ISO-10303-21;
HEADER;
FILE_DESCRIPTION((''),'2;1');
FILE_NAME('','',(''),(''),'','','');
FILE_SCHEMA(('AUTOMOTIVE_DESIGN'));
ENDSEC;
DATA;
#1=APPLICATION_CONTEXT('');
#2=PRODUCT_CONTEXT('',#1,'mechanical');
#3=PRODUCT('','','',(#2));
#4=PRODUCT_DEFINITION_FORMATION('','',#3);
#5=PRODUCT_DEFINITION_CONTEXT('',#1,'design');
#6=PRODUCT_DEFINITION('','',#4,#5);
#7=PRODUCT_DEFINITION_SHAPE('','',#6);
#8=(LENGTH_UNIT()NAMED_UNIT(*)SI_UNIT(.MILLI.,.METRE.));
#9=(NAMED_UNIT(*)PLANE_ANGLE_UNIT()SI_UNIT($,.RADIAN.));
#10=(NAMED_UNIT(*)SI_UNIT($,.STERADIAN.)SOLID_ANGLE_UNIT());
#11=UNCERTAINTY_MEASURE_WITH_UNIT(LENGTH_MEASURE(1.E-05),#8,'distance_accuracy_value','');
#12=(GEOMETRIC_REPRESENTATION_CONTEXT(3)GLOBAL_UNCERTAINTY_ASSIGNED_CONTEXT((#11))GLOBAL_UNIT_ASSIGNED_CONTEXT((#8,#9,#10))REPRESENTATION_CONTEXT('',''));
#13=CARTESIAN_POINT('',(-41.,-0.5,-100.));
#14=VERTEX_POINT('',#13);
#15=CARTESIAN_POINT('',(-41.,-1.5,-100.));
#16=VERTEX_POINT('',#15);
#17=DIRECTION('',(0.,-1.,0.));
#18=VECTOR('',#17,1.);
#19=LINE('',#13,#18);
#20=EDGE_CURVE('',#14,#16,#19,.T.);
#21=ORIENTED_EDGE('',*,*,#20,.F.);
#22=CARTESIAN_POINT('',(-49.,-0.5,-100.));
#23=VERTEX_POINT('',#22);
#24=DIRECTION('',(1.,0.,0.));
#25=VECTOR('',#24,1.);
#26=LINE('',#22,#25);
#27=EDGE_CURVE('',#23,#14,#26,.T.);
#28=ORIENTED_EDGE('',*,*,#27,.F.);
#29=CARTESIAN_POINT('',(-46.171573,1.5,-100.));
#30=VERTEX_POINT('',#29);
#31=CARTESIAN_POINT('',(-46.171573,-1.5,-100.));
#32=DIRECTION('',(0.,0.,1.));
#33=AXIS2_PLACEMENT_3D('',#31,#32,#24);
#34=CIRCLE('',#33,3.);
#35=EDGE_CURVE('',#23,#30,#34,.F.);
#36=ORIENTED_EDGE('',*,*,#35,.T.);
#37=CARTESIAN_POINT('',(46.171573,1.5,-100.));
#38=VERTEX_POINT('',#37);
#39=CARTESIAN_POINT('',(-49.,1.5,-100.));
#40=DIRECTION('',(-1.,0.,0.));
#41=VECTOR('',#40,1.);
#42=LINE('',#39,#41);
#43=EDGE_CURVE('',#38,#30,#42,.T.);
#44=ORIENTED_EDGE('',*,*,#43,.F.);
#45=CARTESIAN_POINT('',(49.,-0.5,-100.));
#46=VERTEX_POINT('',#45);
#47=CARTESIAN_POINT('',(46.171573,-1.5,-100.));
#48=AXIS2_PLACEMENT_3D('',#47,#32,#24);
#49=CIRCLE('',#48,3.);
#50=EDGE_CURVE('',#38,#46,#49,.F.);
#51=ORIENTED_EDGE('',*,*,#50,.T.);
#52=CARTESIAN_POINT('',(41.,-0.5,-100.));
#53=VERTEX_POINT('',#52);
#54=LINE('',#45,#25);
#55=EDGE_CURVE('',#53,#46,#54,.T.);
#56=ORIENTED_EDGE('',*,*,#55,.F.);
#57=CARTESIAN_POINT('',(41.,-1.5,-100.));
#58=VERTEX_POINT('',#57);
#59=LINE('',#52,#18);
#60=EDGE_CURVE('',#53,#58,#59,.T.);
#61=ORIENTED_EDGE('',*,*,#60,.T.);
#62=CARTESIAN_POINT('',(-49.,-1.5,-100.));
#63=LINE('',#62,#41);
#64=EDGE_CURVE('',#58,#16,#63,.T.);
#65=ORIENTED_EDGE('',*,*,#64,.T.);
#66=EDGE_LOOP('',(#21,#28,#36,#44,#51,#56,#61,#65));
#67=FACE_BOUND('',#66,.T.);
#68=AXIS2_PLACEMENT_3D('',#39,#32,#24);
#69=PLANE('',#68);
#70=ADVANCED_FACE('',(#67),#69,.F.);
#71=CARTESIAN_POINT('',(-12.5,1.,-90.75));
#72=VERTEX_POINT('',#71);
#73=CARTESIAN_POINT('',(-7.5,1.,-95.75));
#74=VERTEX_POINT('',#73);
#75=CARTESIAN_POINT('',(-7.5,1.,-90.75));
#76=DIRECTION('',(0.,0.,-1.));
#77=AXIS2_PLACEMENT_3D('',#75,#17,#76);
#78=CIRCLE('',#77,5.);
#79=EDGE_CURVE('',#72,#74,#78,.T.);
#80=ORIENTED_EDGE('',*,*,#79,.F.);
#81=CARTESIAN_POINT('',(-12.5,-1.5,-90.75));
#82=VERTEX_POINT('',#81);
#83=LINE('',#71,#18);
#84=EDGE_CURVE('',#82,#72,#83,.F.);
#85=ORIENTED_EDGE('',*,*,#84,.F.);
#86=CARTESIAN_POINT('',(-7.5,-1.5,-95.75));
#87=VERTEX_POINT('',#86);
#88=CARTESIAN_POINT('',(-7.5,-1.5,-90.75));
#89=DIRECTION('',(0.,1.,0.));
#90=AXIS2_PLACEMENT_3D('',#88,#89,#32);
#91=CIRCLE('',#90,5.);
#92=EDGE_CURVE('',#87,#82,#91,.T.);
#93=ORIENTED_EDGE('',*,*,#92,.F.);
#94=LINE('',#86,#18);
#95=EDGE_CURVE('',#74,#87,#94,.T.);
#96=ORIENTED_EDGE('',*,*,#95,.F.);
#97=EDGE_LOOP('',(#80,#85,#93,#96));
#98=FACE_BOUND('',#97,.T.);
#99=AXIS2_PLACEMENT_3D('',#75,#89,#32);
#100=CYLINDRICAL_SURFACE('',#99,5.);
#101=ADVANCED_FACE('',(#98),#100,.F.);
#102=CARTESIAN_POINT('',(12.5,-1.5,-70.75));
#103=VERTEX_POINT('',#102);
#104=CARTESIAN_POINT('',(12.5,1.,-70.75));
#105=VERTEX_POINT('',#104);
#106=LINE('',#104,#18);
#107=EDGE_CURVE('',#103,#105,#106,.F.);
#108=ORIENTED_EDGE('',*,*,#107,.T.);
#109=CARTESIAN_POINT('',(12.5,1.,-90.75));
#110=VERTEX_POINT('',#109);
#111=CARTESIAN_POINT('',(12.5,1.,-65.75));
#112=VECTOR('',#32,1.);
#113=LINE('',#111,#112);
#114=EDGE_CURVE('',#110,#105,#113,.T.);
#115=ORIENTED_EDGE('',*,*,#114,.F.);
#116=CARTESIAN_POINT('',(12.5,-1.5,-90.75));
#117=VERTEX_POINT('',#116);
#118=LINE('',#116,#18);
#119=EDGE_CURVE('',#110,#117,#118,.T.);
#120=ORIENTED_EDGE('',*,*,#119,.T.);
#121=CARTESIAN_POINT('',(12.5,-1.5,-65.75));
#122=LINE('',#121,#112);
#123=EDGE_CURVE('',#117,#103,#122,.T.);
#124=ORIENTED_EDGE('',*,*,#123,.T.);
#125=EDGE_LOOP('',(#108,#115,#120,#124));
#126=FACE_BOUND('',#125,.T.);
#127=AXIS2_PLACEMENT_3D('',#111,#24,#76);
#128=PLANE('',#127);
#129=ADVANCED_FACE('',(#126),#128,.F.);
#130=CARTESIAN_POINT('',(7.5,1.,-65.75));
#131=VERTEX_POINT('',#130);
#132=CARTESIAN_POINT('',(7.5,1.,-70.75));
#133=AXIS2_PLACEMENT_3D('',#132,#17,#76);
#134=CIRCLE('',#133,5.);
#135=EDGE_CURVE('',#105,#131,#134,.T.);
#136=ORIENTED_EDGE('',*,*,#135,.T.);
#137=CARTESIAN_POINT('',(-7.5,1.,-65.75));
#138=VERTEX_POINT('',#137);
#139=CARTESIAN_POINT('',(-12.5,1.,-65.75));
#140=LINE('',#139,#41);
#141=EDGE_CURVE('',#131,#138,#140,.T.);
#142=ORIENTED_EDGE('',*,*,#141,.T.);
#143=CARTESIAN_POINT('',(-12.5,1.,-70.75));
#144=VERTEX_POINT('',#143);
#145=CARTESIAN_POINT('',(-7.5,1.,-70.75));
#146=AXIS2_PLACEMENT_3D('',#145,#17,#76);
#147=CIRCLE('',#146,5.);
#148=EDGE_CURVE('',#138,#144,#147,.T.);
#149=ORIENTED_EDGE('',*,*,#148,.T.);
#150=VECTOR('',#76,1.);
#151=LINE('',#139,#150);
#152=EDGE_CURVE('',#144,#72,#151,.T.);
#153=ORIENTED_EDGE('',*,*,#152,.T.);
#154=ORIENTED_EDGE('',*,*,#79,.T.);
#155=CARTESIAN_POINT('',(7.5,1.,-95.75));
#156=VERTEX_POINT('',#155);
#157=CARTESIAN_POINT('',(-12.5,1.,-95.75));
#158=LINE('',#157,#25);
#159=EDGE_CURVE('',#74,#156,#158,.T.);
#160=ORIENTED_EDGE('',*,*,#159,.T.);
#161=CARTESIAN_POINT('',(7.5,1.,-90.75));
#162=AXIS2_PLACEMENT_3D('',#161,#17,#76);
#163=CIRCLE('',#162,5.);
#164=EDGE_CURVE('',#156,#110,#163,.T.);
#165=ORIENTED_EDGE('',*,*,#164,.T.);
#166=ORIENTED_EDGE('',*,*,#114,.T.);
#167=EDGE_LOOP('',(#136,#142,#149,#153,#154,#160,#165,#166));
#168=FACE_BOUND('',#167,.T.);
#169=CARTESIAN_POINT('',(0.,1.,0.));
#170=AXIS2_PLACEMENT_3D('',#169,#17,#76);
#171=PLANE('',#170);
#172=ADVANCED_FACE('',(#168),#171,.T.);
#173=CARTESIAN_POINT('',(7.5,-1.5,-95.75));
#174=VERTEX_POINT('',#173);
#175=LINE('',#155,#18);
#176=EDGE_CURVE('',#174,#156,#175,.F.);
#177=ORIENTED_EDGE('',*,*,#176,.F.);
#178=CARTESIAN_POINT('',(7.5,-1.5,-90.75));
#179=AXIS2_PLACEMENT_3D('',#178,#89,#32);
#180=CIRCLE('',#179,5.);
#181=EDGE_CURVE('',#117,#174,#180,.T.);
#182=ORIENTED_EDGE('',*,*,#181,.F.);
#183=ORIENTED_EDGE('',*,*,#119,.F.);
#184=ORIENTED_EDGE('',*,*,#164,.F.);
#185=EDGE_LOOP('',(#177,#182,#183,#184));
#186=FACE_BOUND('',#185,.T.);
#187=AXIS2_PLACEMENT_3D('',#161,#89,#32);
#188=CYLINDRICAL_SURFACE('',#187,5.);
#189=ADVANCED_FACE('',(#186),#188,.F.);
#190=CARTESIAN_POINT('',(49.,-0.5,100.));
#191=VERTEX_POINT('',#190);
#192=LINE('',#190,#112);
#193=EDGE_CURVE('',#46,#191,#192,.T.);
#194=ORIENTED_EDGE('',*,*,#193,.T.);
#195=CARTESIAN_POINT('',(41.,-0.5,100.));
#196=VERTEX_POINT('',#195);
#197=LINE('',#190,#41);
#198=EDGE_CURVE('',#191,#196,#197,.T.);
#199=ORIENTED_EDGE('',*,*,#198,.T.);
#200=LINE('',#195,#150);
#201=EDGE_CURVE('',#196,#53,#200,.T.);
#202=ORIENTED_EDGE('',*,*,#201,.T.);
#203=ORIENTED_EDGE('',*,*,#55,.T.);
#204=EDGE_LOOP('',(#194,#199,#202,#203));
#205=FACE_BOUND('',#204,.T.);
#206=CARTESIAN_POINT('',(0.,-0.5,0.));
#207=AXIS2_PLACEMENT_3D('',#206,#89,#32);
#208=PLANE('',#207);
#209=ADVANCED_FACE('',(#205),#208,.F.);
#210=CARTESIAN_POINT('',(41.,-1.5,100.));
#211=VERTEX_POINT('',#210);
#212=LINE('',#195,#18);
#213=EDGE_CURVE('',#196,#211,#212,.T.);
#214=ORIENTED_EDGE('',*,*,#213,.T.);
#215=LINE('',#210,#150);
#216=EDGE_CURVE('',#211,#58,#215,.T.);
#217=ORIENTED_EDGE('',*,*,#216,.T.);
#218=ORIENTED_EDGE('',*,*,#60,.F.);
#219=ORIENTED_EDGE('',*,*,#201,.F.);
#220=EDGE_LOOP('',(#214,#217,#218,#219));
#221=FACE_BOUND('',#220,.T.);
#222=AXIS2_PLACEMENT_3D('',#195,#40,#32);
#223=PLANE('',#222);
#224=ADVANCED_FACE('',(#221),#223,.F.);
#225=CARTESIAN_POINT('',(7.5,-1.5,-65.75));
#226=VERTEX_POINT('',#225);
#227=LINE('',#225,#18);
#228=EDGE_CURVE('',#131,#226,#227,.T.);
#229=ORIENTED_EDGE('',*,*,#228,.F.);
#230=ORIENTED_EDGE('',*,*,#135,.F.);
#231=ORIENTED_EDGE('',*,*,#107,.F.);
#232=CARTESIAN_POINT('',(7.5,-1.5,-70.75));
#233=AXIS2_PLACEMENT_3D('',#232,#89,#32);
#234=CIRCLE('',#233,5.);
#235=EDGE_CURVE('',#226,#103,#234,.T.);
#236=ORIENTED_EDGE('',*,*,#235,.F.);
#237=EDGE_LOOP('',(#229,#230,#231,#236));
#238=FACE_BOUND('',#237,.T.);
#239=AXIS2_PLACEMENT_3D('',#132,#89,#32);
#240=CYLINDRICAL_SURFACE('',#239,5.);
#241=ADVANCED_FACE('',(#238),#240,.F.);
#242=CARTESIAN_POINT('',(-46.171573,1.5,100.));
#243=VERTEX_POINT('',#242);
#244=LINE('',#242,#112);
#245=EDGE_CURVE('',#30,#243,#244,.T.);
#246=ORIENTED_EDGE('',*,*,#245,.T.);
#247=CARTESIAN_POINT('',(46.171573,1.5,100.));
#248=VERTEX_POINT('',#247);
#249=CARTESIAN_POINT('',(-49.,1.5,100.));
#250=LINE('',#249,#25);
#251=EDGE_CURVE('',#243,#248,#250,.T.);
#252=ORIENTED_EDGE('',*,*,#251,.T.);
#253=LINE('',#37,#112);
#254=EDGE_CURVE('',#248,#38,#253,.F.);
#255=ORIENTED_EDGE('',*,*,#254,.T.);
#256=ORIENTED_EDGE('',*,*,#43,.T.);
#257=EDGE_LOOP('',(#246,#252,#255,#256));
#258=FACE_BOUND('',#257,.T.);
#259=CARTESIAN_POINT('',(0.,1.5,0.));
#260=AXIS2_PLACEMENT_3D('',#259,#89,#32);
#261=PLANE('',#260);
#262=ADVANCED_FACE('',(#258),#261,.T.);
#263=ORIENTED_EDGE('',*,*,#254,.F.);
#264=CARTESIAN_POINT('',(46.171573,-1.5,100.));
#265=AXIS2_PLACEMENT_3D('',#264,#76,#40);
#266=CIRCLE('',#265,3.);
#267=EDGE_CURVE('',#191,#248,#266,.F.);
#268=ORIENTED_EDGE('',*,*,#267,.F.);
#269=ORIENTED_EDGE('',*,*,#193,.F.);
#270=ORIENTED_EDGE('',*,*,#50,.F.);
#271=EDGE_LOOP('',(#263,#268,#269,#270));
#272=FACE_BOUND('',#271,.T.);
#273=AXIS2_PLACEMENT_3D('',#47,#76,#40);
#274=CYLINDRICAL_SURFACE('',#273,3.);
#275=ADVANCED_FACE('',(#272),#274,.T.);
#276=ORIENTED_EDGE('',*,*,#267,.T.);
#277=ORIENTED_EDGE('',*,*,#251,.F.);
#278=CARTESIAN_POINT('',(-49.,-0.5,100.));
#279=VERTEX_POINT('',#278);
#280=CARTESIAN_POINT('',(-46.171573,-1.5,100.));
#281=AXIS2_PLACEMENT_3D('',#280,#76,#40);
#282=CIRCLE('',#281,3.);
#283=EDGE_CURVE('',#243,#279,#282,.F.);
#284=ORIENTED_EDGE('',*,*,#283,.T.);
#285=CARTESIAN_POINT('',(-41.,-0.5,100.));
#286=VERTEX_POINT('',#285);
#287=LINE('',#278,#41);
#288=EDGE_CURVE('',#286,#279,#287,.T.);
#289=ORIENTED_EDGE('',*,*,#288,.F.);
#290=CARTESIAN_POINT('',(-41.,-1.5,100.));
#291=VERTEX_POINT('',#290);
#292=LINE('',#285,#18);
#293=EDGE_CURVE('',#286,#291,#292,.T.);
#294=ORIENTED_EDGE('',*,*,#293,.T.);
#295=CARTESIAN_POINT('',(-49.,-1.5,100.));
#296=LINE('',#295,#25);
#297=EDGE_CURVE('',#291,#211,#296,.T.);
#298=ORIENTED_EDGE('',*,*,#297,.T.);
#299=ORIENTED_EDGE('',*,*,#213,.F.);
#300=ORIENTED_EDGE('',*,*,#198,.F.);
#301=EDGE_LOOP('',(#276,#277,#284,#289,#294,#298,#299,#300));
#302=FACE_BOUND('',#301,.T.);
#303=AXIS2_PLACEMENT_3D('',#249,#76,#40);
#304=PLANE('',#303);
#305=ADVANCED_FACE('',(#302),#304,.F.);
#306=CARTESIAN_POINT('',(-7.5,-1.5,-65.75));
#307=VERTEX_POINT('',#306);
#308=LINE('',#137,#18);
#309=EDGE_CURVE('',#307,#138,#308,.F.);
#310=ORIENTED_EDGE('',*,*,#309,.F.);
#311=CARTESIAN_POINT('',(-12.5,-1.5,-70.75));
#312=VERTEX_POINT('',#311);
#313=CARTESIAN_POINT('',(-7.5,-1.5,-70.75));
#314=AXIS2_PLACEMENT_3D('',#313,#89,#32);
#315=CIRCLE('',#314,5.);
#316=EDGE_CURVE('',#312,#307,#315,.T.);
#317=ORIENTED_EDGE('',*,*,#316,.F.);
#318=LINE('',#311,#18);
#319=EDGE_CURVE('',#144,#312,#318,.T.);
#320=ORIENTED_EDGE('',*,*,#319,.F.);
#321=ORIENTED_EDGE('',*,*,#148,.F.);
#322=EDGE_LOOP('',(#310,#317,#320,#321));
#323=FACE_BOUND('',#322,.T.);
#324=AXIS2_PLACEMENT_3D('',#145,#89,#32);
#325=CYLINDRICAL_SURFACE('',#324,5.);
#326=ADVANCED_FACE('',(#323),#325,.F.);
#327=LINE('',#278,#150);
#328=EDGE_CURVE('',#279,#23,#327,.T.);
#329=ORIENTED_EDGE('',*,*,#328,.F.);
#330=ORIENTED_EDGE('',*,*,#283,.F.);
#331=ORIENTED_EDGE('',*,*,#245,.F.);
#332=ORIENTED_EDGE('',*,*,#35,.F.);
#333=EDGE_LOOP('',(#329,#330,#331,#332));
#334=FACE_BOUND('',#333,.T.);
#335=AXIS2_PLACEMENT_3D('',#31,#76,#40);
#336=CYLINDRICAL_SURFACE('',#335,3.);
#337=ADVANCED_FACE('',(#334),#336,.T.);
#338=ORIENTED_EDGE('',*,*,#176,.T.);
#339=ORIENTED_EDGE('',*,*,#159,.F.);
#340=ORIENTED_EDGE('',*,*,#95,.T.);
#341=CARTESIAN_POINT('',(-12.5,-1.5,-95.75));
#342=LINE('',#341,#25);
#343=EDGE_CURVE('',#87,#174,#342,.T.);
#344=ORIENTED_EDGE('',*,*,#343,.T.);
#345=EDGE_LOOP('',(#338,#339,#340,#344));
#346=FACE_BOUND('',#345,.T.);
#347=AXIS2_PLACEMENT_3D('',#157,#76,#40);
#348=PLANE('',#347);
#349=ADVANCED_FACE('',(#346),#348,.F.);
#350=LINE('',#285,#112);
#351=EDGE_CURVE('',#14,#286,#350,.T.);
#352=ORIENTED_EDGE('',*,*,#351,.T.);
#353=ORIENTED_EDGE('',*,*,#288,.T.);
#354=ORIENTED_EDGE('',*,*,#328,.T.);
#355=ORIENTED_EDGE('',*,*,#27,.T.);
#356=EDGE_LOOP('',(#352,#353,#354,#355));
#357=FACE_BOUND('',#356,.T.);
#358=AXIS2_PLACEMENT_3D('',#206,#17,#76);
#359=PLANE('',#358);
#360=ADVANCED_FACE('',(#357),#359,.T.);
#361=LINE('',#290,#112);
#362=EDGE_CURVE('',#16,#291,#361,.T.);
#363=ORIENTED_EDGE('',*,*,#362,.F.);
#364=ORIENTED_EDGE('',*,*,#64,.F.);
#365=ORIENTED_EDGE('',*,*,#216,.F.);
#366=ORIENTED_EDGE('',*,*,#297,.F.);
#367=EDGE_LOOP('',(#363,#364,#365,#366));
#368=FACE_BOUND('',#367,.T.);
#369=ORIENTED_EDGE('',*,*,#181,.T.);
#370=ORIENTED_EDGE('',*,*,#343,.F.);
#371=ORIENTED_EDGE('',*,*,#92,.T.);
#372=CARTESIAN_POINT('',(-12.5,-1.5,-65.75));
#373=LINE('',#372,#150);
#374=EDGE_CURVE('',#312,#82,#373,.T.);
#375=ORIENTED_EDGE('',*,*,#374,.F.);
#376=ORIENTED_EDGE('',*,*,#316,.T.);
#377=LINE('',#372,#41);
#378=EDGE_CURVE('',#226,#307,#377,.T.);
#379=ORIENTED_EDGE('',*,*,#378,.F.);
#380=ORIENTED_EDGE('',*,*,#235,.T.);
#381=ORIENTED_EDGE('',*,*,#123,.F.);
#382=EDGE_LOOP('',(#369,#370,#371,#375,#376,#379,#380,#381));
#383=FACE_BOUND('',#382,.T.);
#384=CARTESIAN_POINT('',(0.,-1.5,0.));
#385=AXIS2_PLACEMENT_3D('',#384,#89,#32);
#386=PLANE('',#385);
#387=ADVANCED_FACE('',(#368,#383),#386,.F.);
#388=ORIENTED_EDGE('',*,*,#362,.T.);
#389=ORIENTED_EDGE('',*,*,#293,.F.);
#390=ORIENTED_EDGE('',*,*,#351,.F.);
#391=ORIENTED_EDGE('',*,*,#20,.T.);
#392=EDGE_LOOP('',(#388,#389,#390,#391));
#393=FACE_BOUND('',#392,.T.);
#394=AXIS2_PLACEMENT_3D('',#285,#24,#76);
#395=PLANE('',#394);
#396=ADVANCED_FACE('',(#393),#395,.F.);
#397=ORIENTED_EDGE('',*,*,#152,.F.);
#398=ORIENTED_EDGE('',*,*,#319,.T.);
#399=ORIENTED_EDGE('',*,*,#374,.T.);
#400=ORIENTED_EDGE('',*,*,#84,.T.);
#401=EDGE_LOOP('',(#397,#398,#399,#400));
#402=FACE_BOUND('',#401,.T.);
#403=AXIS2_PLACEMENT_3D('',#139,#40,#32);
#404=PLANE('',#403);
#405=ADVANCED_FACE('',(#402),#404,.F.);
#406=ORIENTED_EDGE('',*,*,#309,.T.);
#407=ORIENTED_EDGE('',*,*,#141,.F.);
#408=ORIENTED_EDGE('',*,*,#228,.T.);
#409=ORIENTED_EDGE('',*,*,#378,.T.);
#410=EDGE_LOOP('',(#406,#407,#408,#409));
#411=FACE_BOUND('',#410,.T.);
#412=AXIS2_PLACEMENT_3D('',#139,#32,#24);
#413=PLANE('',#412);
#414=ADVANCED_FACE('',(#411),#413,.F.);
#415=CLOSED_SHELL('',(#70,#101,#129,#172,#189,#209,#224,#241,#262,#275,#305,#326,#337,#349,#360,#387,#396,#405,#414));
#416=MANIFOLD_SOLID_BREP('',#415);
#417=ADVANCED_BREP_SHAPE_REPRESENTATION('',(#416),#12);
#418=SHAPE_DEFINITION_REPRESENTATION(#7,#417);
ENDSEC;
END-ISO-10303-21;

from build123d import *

# Parameters (mm, degrees)
SKIZZE2_W                       = 98
SKIZZE2_H                       = 200
AUFSATZ_LINEAR_AUSTRAGEN2_DEPTH = 1.5
SKIZZE4_W                       = 8
SKIZZE4_H                       = 200
SCHNITT_LINEAR_AUSTRAGEN1_DEPTH = 1
VERRUNDUNG1_R                   = 3
SKIZZE5_W                       = 25
SKIZZE5_H                       = 30
SCHNITT_LINEAR_AUSTRAGEN2_DEPTH = 2.5
VERRUNDUNG2_R                   = 5


with BuildPart() as part:
    # Skizze2 → Aufsatz-Linear austragen2 (new, symmetric)
    with BuildSketch(Plane(origin=(0, 0, 0), x_dir=(1, 0, 0), z_dir=(0, 1, 0))):
        Rectangle(SKIZZE2_W, SKIZZE2_H)
    extrude(amount=AUFSATZ_LINEAR_AUSTRAGEN2_DEPTH, both=True)

    # Skizze4 → Schnitt-Linear austragen1 (cut)
    with BuildSketch(Plane.XZ.offset(1.5)):
        with Locations((-45, 0)):
            Rectangle(SKIZZE4_W, SKIZZE4_H)
        with Locations((45, 0)):
            Rectangle(SKIZZE4_W, SKIZZE4_H)
    extrude(amount=-SCHNITT_LINEAR_AUSTRAGEN1_DEPTH, mode=Mode.SUBTRACT)

    # Verrundung1
    # the kernel refuses this fillet: 3 mm, written as the material it takes off along each edge
    with BuildSketch(Plane(origin=(-49, 1.5, 107.071067812), x_dir=(0, -1, 0), z_dir=(0, 0, -1))) as verrundung1_piece_1:
        with BuildLine():
            CenterArc((3, -2.828427125), VERRUNDUNG1_R, 109.471220634, 70.528779366)
            Line((0, -2.828427125), (-0.06, -2.828427125))
            Line((-0.06, -2.828427125), (-0.06, 0))
            Line((-0.06, 0), (0, 0.06))
            ThreePointArc((0, 0.06), (1, 0.06), (1.98, 0.056568542))
            Line((1.98, 0.056568542), (2, 0))
        make_face()
    extrude(amount=214.142135624, mode=Mode.SUBTRACT)
    with BuildSketch(Plane(origin=(49, 1.5, -107.071067812), x_dir=(-1, 0, 0), z_dir=(0, 0, 1))) as verrundung1_piece_2:
        with BuildLine():
            CenterArc((2.828427125, 3), VERRUNDUNG1_R, 199.471220634, 70.528779366)
            Line((0, 2), (-0.056568542, 1.98))
            ThreePointArc((-0.056568542, 1.98), (-0.06, 1), (-0.06, 0))
            Line((-0.06, 0), (0, -0.06))
            Line((0, -0.06), (2.828427125, -0.06))
            Line((2.828427125, -0.06), (2.828427125, 0))
        make_face()
    extrude(amount=214.142135624, mode=Mode.SUBTRACT)

    # Skizze5 → Schnitt-Linear austragen2 (cut)
    with BuildSketch(Plane.XZ.offset(1.5)):
        with Locations((0, -80.75)):
            Rectangle(SKIZZE5_W, SKIZZE5_H)
    extrude(amount=-SCHNITT_LINEAR_AUSTRAGEN2_DEPTH, mode=Mode.SUBTRACT)

    # Verrundung2
    verrundung2_edges = [part.edges().sort_by_distance(p)[0] for p in [
        (-12.5, -0.25, -95.75),
        (-12.5, -0.25, -65.75),
        (12.5, -0.25, -65.75),
        (12.5, -0.25, -95.75),
    ]]
    fillet(verrundung2_edges, radius=VERRUNDUNG2_R)


solid = part.part
